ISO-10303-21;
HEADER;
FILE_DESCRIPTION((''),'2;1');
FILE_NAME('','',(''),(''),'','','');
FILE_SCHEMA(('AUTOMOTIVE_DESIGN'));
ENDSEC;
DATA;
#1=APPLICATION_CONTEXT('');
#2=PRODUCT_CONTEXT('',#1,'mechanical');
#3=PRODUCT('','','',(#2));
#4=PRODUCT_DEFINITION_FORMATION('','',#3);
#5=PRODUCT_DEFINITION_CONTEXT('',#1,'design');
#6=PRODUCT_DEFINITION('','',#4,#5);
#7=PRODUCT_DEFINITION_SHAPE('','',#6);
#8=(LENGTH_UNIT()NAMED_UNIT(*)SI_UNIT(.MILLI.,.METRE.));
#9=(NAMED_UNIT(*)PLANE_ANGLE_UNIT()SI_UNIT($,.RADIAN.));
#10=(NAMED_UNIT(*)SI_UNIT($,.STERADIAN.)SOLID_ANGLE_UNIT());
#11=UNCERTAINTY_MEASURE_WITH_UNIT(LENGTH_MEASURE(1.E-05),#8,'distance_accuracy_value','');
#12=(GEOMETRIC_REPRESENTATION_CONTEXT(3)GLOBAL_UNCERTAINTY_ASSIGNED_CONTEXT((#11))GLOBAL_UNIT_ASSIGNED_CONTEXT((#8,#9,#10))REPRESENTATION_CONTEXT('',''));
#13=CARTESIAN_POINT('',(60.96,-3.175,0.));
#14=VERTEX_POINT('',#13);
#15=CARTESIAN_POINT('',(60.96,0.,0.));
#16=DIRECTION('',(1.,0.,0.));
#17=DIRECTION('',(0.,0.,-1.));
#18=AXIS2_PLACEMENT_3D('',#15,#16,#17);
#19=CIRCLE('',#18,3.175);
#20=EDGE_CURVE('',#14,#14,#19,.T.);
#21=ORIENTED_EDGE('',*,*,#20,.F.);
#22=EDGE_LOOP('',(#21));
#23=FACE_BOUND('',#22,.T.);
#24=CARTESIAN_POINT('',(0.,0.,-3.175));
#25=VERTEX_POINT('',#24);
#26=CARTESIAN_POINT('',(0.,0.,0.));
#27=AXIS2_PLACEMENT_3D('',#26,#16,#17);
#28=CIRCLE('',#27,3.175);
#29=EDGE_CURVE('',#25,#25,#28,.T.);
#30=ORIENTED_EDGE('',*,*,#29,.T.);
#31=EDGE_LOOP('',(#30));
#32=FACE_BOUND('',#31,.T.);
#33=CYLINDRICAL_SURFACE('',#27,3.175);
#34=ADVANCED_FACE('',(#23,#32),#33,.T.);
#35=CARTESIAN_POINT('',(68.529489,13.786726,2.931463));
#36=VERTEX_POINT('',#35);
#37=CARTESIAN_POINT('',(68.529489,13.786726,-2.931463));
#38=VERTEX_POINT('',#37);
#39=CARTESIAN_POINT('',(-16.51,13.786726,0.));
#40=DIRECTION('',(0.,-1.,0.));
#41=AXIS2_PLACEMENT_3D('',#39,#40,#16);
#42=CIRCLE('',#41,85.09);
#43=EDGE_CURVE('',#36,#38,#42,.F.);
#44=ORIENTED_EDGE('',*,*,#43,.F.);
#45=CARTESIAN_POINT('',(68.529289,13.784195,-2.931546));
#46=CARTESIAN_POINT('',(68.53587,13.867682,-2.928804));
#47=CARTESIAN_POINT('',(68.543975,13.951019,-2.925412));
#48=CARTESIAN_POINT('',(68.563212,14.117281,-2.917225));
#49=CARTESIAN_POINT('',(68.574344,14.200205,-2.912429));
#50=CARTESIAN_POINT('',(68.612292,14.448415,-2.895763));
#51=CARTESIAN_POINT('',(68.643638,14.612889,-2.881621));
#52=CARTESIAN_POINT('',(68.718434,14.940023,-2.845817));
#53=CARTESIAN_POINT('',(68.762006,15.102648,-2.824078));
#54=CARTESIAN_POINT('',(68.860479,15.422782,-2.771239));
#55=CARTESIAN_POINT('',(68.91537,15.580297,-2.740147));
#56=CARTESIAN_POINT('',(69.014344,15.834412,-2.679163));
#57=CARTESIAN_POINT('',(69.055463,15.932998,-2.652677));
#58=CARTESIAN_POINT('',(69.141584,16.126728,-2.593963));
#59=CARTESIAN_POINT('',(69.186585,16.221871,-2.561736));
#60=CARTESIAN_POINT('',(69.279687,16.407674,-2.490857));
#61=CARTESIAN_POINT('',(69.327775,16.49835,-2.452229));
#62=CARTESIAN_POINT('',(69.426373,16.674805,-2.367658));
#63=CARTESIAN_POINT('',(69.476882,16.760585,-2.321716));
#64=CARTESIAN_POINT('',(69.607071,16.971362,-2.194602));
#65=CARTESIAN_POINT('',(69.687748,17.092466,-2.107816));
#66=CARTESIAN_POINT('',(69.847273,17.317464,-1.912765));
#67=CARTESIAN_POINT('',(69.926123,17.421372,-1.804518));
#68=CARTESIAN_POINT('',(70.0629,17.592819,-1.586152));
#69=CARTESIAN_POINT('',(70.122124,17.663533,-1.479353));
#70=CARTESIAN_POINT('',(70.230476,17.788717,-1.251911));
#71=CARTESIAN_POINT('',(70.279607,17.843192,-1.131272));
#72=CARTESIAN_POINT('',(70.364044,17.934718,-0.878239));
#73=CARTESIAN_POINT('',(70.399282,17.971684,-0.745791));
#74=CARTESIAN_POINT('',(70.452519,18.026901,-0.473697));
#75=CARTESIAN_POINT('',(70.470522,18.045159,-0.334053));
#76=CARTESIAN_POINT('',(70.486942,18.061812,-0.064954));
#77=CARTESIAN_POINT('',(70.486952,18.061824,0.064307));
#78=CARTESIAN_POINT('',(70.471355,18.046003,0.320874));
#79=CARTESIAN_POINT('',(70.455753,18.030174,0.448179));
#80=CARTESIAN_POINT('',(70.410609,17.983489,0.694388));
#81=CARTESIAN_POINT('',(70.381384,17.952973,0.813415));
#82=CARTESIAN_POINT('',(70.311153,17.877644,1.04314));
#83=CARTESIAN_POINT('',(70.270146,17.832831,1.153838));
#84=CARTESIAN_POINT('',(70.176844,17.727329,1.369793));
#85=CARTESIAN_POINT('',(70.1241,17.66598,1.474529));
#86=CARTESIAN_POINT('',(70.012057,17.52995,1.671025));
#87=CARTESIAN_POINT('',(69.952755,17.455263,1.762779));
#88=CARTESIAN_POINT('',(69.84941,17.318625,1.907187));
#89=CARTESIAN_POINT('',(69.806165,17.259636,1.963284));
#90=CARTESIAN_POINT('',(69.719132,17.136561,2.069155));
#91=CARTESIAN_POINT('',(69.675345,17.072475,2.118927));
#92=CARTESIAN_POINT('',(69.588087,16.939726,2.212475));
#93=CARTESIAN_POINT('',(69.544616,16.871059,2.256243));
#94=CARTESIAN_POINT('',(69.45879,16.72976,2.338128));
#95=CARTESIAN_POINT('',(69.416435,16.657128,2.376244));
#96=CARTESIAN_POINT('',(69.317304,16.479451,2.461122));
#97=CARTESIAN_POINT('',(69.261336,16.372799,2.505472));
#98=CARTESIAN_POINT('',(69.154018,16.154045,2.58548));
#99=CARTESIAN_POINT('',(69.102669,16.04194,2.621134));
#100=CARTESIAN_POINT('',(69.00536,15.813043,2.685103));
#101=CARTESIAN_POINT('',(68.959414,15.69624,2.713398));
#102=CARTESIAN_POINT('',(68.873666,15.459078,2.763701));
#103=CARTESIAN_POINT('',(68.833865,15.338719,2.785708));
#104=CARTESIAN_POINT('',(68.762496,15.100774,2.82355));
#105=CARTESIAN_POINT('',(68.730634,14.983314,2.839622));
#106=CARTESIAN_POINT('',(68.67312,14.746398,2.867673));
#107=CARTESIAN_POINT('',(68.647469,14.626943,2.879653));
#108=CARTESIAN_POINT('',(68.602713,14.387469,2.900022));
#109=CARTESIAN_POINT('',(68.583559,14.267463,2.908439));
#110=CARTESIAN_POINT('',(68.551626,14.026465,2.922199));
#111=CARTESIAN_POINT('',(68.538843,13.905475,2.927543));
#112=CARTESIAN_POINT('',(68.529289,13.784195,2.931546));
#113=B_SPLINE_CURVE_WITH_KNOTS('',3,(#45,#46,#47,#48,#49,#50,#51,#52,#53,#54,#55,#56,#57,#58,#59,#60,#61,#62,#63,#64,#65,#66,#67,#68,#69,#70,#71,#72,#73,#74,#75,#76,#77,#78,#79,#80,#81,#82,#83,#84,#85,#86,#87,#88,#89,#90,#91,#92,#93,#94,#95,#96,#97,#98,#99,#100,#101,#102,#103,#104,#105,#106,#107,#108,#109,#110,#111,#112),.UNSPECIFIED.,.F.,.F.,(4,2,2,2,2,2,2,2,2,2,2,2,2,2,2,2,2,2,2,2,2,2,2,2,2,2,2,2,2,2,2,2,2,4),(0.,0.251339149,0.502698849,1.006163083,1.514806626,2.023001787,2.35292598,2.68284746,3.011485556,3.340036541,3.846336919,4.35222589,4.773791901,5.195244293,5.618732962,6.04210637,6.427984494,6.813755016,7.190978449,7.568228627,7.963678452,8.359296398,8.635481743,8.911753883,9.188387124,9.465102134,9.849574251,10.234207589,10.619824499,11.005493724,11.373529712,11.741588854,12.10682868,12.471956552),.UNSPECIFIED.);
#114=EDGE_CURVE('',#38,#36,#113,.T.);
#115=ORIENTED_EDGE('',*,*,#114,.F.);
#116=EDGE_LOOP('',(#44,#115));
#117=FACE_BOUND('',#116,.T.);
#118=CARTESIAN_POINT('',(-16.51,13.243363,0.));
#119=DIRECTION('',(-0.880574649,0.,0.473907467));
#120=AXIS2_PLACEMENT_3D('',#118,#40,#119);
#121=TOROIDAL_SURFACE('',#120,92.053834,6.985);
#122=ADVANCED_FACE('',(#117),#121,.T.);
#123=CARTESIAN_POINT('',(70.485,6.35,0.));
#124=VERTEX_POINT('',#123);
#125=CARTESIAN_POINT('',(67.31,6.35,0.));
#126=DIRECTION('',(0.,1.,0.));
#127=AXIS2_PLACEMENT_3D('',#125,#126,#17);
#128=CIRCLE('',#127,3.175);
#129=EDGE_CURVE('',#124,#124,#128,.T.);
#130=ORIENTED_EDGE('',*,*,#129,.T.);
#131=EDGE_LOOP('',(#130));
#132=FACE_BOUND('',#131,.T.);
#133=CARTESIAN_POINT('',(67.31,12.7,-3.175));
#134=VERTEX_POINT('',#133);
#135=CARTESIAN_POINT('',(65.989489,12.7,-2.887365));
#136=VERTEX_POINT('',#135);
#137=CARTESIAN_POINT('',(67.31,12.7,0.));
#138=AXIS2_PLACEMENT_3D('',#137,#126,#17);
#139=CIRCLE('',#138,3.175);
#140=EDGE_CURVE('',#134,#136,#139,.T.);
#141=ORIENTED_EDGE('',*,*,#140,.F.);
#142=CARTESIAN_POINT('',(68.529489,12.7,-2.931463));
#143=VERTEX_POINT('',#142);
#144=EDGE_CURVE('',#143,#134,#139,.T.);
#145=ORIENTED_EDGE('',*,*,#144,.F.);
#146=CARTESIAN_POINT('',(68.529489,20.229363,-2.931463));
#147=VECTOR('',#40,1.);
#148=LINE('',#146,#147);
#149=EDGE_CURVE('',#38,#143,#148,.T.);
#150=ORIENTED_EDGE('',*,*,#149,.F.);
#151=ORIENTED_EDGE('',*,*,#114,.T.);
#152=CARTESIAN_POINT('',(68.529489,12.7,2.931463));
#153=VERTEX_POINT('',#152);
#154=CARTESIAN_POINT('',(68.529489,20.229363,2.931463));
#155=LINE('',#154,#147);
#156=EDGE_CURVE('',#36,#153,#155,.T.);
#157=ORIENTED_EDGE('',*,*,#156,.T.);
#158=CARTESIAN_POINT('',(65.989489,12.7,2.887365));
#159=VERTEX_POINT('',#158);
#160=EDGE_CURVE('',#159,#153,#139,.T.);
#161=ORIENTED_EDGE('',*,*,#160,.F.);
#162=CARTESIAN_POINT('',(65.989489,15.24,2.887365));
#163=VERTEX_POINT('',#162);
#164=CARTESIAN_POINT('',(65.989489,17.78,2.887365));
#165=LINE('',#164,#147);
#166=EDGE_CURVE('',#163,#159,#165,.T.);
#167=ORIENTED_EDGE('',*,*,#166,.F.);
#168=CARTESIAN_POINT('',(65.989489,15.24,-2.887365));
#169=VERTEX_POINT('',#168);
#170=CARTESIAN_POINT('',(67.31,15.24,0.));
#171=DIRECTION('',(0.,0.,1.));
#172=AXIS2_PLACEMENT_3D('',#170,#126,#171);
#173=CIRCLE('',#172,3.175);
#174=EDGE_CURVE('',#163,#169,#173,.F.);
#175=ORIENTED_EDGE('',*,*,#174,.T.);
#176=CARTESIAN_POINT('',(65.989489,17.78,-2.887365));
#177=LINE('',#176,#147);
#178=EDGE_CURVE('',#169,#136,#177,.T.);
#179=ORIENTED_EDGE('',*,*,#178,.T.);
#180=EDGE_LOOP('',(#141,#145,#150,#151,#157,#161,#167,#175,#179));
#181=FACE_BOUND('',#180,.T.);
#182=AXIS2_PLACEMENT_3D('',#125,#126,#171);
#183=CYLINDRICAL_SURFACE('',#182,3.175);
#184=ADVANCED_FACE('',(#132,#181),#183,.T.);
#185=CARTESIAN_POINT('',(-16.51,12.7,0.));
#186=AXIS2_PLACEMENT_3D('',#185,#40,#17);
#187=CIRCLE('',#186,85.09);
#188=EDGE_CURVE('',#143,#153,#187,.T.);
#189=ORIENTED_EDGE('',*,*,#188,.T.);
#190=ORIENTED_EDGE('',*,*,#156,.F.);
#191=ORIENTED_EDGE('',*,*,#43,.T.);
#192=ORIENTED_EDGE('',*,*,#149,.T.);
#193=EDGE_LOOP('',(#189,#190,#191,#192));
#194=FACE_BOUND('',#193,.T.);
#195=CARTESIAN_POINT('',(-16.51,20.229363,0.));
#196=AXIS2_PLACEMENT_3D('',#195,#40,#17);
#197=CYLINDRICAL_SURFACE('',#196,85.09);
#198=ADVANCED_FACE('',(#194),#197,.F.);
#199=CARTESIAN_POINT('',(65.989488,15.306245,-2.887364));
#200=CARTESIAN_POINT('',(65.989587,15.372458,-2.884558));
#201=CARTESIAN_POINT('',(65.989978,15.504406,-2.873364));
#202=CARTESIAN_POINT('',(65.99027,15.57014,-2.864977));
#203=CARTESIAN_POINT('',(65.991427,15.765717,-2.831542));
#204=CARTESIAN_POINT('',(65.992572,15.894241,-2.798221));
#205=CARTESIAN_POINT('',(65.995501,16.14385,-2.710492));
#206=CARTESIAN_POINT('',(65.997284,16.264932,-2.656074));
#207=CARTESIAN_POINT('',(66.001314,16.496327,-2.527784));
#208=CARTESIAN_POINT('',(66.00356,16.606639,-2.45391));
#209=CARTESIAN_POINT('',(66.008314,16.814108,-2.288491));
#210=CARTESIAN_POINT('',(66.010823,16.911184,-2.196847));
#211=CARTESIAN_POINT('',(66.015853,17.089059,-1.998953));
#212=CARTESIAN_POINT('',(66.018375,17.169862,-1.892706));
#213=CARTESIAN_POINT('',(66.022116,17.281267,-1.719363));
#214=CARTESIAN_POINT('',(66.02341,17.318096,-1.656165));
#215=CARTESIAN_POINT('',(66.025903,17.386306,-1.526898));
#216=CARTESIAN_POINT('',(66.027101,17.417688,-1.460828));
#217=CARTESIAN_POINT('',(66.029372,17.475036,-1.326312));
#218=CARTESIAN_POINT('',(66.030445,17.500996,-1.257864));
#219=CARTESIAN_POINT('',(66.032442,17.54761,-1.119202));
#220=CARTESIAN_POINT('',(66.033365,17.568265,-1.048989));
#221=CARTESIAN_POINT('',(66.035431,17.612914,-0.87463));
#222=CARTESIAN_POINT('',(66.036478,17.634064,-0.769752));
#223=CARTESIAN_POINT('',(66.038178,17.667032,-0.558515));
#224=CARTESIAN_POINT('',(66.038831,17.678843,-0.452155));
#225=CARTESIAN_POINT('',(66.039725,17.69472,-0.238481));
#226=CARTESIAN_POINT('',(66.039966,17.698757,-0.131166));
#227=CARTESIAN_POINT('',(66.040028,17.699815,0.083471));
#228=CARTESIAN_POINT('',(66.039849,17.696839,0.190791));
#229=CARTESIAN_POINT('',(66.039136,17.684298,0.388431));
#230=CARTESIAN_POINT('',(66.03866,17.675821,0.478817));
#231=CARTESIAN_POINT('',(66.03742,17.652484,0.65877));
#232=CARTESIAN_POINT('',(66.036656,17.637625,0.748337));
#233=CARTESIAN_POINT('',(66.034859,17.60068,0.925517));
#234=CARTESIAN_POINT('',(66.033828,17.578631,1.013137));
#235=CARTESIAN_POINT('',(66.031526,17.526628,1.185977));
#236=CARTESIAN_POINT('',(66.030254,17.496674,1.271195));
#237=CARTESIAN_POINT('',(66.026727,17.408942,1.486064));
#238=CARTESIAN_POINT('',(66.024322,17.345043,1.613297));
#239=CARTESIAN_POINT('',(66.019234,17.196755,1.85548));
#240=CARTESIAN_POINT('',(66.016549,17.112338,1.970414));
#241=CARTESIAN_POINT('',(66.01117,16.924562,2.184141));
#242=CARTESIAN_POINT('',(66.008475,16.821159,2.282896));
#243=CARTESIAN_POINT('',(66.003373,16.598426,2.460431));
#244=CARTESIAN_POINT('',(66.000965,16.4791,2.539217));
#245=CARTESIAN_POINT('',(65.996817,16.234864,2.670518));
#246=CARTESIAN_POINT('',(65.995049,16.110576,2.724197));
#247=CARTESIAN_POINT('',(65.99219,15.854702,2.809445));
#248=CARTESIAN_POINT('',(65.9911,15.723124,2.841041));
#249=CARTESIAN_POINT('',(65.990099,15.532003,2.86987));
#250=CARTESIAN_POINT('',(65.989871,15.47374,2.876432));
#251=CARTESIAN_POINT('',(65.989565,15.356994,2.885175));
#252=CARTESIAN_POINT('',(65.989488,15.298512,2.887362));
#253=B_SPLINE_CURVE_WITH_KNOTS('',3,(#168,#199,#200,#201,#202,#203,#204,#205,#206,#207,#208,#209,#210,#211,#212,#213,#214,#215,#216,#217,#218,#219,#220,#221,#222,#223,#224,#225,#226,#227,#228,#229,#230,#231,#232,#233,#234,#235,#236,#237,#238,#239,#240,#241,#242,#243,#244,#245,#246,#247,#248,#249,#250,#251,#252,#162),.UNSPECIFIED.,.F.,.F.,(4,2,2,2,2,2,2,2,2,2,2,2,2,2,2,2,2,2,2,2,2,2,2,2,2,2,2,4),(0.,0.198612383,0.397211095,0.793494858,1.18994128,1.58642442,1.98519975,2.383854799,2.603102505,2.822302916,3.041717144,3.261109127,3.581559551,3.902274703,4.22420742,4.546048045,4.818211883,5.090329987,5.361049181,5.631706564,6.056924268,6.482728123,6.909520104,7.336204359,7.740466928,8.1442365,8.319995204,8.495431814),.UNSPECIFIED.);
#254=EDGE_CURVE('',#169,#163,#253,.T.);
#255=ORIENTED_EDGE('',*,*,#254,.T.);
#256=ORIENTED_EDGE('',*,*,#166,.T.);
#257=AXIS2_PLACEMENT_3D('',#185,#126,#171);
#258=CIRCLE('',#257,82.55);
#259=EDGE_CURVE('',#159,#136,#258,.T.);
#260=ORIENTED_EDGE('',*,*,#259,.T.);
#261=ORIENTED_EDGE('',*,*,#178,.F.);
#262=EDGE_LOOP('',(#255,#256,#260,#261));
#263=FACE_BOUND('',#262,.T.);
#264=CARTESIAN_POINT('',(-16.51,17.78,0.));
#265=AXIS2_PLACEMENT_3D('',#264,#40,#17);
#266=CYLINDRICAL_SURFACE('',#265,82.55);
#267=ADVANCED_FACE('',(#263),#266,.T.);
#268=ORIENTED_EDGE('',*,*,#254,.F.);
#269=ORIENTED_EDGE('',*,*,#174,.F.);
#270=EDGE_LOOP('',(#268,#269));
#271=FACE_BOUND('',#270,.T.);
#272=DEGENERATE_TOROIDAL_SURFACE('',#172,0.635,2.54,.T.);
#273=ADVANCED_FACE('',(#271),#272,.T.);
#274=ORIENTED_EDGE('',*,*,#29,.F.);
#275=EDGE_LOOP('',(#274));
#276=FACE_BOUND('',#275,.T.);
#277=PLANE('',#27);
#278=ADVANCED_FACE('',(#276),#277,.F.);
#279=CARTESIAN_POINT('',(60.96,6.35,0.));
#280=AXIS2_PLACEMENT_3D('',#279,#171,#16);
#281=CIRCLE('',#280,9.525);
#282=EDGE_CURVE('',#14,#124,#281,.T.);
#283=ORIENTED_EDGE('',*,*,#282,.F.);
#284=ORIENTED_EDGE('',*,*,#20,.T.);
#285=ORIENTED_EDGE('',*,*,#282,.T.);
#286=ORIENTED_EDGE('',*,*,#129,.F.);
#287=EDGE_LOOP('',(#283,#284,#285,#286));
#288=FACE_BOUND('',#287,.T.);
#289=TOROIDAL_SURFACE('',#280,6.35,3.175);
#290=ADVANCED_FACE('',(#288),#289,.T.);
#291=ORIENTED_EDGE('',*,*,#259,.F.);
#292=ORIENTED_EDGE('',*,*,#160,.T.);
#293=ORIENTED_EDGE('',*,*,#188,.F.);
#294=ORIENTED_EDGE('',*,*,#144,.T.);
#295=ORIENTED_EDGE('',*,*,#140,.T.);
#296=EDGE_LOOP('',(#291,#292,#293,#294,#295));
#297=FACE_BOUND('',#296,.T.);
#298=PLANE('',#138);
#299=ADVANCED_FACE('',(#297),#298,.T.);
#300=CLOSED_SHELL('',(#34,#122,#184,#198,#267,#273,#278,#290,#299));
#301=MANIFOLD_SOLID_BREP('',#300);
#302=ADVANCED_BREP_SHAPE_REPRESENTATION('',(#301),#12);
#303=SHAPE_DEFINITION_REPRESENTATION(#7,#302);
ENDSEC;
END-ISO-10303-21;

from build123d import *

# Parameters (mm, degrees)
SKETCH1_R                      = 3.175
BOSS_EXTRUDE1_START            = 5.08
BOSS_EXTRUDE1_DEPTH            = 5.08
BOSS_EXTRUDE2_REACH            = 74.32
BOSS_EXTRUDE2_END_MAJOR_RADIUS = 92.053833851
BOSS_EXTRUDE2_END_MINOR_RADIUS = 6.985
FILLET1_R                      = 2.54


with BuildPart() as part:
    # Sweep3: sweep along a path in Sketch2
    with BuildLine(Plane.XY) as sweep3_path:
        Line((0, 0), (60.96, 0))
        ThreePointArc((60.96, 0), (65.450128061, 1.859871939), (67.31, 6.35))
        Line((67.31, 6.35), (67.31, 12.7))
    # Sketch1 → Sweep3 (sweep)
    with BuildSketch(Plane(origin=(0, 0, 0), x_dir=(0, 0, -1), z_dir=(1, 0, 0))):
        Circle(SKETCH1_R)
    sweep(path=sweep3_path.line)

    # Sketch3 → Boss-Extrude1 (add)
    with BuildSketch(Plane(origin=(0, 12.7, 0), x_dir=(1, 0, 0), z_dir=(0, 1, 0)).offset(BOSS_EXTRUDE1_START)):
        with BuildLine():
            ThreePointArc((65.989488636, 2.88736467), (64.135, 0), (65.989488636, -2.88736467))
            ThreePointArc((65.989488636, -2.88736467), (66.04, 0), (65.989488636, 2.88736467))
        make_face()
    extrude(amount=-BOSS_EXTRUDE1_DEPTH)

    # Boss-Extrude2: up to this torus (the profile starts inside it)
    boss_extrude2_end = Plane(origin=(-16.51, 13.243362772, 0), z_dir=(0, -1, 0)) * Torus(BOSS_EXTRUDE2_END_MAJOR_RADIUS, BOSS_EXTRUDE2_END_MINOR_RADIUS, mode=Mode.PRIVATE)
    # Sketch4 → Boss-Extrude2 (add, up to the surface)
    with BuildSketch(Plane(origin=(0, 12.7, 0), x_dir=(1, 0, 0), z_dir=(0, 1, 0)), mode=Mode.PRIVATE) as boss_extrude2_sk1:
        with BuildLine():
            ThreePointArc((68.529488636, -2.931462513), (70.485, 0), (68.529488636, 2.931462513))
            ThreePointArc((68.529488636, 2.931462513), (68.58, 0), (68.529488636, -2.931462513))
        make_face()
    boss_extrude2_tool1 = extrude(boss_extrude2_sk1.sketch, amount=BOSS_EXTRUDE2_REACH, mode=Mode.PRIVATE) & boss_extrude2_end
    add(boss_extrude2_tool1.solids().sort_by_distance((69.356115, 12.7, 0))[0])

    # Fillet1
    # the kernel refuses this fillet: 2.54 mm, written as the material it takes off along each edge
    with BuildSketch(Plane(origin=(67.31, 17.78, 0), x_dir=(0.9999950652018583, 0, -0.0031415874858765833), z_dir=(0.0031415874858765833, 0, 0.9999950652018583))) as fillet1_piece_1_section:
        with BuildLine():
            CenterArc((3.175 - FILLET1_R, -FILLET1_R), FILLET1_R, 0, 90)
            Line((3.175 - FILLET1_R, 0), (3.175, 0))
            Line((3.175, 0), (3.175, -FILLET1_R))
        make_face()
    fillet1_piece_1 = revolve(axis=Axis((67.31, 17.78, 0), (0, 1, 0)), revolution_arc=359.64, mode=Mode.PRIVATE)
    fillet1_piece_1 = fillet1_piece_1 & Plane(origin=(-16.51, 16.807436712, 0), x_dir=(0.9993881118881123, 0, 0.03497716135872228), z_dir=(0, 1, 0)) * Cylinder(82.55, 13, mode=Mode.PRIVATE)
    add(fillet1_piece_1, mode=Mode.SUBTRACT)


solid = part.part
